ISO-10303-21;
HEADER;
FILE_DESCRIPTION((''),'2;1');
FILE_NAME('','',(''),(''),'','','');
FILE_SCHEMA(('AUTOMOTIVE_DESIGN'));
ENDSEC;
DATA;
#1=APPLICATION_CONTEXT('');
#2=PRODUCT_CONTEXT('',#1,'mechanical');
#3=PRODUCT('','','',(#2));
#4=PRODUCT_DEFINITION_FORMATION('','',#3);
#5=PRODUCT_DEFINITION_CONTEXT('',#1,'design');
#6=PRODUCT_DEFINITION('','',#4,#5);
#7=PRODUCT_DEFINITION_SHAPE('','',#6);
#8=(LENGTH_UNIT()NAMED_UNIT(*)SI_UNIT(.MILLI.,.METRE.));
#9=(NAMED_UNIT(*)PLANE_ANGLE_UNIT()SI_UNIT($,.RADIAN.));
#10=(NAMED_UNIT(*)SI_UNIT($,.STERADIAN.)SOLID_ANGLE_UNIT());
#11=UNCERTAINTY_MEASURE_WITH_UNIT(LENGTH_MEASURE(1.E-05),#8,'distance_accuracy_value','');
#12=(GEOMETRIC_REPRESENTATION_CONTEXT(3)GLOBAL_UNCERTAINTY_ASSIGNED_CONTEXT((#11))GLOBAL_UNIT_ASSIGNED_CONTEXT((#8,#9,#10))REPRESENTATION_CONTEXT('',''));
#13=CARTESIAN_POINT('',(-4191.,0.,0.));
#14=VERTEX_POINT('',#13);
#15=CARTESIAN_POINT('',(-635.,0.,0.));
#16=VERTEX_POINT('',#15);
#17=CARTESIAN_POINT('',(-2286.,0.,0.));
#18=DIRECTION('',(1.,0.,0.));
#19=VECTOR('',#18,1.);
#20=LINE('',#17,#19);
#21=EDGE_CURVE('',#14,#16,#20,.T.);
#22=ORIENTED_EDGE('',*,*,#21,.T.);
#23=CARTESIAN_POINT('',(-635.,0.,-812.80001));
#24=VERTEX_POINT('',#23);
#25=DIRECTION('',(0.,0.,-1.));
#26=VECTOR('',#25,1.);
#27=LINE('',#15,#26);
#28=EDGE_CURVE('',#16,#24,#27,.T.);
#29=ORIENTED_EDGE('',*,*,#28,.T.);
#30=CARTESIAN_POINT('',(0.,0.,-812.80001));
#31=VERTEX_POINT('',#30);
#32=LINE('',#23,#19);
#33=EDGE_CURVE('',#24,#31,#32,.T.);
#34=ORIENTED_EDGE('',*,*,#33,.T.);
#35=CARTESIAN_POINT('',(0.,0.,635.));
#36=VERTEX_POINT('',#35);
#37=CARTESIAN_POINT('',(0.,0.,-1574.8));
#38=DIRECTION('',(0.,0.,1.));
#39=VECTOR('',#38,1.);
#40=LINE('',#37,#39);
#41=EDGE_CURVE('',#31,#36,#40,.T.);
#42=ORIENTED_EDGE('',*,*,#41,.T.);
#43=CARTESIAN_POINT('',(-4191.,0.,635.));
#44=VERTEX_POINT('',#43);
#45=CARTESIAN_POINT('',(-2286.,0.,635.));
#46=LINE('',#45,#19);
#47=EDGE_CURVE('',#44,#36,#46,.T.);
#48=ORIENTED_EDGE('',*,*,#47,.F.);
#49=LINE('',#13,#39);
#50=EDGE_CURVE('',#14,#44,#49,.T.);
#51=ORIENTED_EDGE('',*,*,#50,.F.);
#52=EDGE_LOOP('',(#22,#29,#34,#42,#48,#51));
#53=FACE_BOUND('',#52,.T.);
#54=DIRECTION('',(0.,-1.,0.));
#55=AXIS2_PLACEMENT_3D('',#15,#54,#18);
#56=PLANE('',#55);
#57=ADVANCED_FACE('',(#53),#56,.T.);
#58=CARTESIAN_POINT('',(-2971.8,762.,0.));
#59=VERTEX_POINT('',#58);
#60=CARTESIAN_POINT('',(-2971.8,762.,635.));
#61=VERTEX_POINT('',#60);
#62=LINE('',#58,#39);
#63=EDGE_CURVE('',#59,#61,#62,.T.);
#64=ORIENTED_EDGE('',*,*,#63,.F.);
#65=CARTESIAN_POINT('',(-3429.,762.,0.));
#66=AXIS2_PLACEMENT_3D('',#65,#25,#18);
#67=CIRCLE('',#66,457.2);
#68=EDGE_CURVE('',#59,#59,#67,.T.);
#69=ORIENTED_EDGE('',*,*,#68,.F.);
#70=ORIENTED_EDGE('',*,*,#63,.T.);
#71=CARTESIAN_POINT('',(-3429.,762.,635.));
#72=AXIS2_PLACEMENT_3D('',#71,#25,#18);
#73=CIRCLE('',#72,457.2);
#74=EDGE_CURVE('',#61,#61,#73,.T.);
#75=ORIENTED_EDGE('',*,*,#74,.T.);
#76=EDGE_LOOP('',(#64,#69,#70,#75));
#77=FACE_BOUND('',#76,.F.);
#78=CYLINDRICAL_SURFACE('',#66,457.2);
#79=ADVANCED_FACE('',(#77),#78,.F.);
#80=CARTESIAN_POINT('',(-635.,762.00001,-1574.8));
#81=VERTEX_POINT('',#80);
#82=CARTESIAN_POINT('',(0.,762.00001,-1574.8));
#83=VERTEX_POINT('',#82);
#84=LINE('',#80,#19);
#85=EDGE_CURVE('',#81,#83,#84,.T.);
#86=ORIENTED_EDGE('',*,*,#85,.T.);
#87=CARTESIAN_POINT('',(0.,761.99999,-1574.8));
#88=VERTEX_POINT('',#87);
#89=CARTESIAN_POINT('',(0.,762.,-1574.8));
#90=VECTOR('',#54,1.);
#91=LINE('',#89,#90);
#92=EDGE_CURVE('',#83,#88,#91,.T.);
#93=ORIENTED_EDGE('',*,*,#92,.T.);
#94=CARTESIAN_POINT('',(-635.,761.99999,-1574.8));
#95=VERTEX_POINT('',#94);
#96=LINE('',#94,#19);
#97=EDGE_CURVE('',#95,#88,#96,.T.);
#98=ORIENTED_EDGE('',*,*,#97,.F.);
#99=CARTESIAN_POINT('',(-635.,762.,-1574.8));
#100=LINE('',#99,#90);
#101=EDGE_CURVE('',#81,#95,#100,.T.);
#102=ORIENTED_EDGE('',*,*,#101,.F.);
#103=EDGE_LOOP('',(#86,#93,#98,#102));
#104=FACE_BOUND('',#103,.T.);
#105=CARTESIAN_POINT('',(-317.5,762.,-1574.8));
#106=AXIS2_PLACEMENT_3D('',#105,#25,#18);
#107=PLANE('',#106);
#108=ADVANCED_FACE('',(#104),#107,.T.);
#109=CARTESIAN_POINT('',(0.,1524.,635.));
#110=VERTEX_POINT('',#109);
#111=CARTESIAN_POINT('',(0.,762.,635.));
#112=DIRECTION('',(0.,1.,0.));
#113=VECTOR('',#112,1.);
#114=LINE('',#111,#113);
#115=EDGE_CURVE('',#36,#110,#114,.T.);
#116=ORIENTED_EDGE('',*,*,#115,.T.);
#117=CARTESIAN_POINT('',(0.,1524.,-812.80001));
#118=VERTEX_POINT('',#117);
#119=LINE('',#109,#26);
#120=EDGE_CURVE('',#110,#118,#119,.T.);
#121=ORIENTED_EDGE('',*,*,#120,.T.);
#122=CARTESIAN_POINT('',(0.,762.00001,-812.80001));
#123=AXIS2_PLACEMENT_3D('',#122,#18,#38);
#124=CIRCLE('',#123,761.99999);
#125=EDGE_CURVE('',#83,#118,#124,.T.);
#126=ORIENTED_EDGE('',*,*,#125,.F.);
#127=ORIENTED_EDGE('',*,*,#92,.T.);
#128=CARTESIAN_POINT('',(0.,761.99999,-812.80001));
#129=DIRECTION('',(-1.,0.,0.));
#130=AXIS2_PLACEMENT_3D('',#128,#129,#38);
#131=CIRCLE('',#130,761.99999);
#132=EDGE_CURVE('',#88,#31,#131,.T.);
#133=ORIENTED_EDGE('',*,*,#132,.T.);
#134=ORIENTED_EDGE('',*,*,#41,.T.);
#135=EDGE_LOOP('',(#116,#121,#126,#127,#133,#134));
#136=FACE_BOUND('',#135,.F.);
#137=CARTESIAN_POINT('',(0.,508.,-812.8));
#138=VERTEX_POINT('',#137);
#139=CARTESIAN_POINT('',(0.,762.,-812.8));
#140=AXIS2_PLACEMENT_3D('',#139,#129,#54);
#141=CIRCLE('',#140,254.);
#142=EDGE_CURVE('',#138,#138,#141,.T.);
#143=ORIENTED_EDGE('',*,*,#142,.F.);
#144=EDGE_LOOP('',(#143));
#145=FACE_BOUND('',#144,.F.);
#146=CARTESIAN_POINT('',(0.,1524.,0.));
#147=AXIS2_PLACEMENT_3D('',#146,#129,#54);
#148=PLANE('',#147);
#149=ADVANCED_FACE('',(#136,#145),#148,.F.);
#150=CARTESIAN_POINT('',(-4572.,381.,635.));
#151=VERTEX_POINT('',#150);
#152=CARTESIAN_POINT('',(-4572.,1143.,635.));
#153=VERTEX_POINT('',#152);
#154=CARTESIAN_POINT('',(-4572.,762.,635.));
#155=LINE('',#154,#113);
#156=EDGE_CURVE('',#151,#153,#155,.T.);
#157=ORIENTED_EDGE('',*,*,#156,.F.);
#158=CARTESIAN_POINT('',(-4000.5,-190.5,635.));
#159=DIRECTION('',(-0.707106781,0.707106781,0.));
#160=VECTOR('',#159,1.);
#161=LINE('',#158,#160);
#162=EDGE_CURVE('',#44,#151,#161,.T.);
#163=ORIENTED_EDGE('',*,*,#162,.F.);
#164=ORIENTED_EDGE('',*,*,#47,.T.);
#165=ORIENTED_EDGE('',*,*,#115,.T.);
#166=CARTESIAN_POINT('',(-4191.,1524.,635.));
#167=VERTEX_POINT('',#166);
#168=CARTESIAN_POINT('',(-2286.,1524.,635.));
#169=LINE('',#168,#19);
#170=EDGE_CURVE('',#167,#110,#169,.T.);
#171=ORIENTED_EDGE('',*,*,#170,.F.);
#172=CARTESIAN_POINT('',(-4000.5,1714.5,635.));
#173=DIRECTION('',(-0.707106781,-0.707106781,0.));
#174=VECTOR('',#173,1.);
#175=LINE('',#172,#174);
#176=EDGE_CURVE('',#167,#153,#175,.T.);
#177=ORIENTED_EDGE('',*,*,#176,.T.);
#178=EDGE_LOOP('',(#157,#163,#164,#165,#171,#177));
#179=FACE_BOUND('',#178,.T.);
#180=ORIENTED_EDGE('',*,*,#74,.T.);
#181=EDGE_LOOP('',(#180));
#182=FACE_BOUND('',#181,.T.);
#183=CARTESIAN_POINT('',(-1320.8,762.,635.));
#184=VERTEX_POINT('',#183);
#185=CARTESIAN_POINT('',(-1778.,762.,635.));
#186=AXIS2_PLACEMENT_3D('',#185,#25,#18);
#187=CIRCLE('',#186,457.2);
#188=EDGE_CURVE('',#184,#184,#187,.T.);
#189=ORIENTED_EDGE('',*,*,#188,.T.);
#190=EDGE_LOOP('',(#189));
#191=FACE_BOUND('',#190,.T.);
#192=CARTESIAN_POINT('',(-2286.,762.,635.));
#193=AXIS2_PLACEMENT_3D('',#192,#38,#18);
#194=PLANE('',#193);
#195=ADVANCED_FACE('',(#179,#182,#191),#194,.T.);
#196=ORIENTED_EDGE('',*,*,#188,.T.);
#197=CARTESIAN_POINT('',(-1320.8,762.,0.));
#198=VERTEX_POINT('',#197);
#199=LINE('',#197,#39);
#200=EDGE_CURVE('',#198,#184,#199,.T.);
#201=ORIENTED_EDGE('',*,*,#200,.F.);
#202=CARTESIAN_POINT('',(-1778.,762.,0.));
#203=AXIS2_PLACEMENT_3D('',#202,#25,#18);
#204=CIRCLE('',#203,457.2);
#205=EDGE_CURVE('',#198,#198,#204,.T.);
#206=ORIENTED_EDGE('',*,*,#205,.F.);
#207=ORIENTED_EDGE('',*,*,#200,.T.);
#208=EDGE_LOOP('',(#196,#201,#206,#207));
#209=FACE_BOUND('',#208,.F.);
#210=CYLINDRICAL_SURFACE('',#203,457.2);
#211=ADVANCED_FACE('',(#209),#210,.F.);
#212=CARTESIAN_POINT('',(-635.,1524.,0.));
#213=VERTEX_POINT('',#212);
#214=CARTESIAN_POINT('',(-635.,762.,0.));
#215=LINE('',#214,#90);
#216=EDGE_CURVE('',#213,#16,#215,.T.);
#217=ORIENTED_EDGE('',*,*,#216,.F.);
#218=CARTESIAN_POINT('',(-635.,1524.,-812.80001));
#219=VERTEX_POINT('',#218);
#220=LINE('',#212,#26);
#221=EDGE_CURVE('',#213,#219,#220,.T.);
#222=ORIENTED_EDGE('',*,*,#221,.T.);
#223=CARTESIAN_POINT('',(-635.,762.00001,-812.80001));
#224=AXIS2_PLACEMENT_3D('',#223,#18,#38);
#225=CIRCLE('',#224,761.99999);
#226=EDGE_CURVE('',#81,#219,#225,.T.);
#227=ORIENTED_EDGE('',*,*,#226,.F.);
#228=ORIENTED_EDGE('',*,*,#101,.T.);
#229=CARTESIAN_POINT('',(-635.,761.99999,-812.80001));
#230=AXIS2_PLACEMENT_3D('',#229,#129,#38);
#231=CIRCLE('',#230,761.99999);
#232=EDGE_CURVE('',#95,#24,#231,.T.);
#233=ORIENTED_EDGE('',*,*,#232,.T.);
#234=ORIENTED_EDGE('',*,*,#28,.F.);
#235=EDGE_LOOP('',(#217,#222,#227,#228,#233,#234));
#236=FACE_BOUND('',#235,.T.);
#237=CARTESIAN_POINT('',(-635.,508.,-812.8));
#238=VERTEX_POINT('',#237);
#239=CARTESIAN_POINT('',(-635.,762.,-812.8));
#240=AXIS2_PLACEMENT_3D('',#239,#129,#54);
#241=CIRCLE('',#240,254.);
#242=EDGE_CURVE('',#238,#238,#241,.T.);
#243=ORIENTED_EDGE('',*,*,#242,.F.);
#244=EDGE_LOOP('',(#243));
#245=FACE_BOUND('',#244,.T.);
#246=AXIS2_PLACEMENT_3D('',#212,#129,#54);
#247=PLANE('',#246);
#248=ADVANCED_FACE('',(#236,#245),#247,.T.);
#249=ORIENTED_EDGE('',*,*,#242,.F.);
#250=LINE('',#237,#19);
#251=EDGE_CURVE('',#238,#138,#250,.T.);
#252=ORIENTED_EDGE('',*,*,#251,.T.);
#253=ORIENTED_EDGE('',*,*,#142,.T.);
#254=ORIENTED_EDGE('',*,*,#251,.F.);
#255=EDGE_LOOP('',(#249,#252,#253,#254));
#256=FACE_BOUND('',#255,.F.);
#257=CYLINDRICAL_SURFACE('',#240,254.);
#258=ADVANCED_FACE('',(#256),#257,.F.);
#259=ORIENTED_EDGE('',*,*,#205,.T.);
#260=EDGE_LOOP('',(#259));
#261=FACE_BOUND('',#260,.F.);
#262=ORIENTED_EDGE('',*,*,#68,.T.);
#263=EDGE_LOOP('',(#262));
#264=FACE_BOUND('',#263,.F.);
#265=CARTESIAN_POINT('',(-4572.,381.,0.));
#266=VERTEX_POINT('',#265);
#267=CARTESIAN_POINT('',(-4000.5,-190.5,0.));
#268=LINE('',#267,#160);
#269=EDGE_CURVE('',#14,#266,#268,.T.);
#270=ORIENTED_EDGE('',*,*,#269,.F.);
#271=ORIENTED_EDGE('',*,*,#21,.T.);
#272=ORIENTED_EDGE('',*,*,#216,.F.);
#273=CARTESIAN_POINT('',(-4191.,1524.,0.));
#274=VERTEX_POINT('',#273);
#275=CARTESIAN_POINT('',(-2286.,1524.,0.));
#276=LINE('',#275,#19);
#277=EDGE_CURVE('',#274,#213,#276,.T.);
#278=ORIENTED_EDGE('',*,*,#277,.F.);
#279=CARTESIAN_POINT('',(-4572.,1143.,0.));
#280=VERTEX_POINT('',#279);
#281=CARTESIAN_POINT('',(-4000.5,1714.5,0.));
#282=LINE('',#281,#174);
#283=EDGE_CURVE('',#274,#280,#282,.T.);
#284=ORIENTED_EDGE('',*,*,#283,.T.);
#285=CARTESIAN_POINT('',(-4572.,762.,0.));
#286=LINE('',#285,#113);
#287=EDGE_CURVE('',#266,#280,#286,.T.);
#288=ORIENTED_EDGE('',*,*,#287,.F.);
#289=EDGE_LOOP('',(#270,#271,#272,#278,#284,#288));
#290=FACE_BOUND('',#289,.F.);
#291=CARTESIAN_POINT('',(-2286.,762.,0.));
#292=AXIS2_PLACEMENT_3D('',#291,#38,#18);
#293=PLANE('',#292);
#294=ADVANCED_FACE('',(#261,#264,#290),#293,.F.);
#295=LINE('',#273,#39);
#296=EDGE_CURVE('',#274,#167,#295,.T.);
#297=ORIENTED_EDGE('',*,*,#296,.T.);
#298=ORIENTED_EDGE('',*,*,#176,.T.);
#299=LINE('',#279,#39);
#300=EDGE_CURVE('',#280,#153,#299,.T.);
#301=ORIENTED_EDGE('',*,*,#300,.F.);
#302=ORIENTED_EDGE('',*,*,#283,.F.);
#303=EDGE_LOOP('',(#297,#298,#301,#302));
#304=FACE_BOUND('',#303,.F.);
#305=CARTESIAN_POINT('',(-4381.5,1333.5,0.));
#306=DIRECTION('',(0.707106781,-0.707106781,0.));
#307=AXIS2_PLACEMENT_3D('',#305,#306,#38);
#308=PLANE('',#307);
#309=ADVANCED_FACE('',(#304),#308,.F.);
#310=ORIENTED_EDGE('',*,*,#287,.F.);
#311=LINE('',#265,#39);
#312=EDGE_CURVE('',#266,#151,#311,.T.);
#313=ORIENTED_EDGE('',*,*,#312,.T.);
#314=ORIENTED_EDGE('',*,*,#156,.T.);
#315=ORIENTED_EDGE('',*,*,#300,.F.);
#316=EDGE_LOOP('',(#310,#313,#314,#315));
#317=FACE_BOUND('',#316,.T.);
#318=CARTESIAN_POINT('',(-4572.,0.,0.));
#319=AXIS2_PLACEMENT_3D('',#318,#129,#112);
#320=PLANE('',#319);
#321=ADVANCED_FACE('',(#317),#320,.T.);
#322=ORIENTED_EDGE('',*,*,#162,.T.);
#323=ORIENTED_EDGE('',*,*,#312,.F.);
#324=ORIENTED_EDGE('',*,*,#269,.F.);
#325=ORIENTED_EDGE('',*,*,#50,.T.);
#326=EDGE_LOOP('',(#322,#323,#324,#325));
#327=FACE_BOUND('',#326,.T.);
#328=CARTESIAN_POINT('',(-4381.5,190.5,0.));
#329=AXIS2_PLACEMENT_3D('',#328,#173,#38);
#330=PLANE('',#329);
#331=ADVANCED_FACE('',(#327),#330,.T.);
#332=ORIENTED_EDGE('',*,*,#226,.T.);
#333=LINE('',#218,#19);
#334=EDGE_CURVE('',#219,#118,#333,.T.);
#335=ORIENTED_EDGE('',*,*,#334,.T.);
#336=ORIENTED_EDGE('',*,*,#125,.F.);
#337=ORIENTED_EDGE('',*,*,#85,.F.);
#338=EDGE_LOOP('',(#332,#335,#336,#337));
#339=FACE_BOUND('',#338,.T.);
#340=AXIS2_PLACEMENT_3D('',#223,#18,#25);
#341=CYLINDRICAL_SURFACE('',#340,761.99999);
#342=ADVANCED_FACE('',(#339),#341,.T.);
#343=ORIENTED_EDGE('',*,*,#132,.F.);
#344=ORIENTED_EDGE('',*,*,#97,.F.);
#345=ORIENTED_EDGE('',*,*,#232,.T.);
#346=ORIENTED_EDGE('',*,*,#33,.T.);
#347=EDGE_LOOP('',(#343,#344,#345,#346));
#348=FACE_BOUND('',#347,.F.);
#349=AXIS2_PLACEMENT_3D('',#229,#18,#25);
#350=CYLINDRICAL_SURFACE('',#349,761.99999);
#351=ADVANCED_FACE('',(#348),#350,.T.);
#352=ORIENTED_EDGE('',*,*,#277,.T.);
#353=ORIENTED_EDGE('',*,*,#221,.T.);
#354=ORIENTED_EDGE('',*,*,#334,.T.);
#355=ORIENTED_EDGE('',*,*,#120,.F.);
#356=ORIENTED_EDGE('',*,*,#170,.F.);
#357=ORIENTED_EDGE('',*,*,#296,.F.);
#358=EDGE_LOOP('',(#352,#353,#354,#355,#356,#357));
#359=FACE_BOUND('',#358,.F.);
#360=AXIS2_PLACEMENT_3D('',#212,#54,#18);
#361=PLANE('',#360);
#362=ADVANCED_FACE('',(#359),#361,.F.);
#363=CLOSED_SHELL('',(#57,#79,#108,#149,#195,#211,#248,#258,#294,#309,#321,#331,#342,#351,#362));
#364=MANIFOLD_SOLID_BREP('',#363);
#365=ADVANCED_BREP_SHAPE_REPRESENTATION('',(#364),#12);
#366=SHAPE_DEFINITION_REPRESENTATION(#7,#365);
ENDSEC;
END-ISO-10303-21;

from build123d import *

# Parameters (mm, degrees)
F0_W     = 4572
F0_H     = 1524
F1_DEPTH = 635
F2_W     = 635
F2_H     = 1524
F3_DEPTH = 1574.8
F4_R     = 761.99999
F5_R     = 457.2
F6_DEPTH = 635
F7_R     = 254
F8_DEPTH = 635
F9_SIZE  = 381


# Not quite as in the source:
# - a fillet or chamfer is up to 0.001 mm smaller than in the source, because OpenCascade refuses the exact size


with BuildPart() as f1:
    # F0 (on Top) → F1 (new body)
    with BuildSketch(Plane.XY):
        with Locations((-2286, 762)):
            Rectangle(F0_W, F0_H)
    extrude(amount=F1_DEPTH)

    # F2 (on face) → F3 (join)
    with BuildSketch(Plane(origin=(0, 0, 0), x_dir=(1, 0, 0), z_dir=(0, 0, -1))):
        with Locations((-317.5, -762)):
            Rectangle(F2_W, F2_H)
    extrude(amount=F3_DEPTH)

    # F4 (radius 762 in the source; OpenCascade refuses exactly that, so slightly less here)
    f4_edges = [f1.edges().sort_by_distance(p)[0] for p in [
        (-317.5, 0, -1574.8),
        (-317.5, 1524, -1574.8),
    ]]
    fillet(f4_edges, radius=F4_R)

    # F5 (on face) → F6 (cut)
    with BuildSketch(Plane(origin=(0, 0, 0), x_dir=(1, 0, 0), z_dir=(0, 0, -1))):
        with Locations((-1778, -762)):
            Circle(F5_R)
        with Locations((-3429, -762)):
            Circle(F5_R)
    extrude(amount=-F6_DEPTH, mode=Mode.SUBTRACT)

    # F7 (on face) → F8 (cut, through all)
    with BuildSketch(Plane(origin=(-635, 0, 0), x_dir=(0, -1, 0), z_dir=(-1, 0, 0))):
        with Locations((-762, -812.8)):
            Circle(F7_R)
    extrude(amount=-F8_DEPTH, mode=Mode.SUBTRACT)

    # F9
    f9_edges = [f1.edges().sort_by_distance(p)[0] for p in [
        (-4572, 0, 317.5),
        (-4572, 1524, 317.5),
    ]]
    chamfer(f9_edges, length=F9_SIZE)


solid = f1.part
